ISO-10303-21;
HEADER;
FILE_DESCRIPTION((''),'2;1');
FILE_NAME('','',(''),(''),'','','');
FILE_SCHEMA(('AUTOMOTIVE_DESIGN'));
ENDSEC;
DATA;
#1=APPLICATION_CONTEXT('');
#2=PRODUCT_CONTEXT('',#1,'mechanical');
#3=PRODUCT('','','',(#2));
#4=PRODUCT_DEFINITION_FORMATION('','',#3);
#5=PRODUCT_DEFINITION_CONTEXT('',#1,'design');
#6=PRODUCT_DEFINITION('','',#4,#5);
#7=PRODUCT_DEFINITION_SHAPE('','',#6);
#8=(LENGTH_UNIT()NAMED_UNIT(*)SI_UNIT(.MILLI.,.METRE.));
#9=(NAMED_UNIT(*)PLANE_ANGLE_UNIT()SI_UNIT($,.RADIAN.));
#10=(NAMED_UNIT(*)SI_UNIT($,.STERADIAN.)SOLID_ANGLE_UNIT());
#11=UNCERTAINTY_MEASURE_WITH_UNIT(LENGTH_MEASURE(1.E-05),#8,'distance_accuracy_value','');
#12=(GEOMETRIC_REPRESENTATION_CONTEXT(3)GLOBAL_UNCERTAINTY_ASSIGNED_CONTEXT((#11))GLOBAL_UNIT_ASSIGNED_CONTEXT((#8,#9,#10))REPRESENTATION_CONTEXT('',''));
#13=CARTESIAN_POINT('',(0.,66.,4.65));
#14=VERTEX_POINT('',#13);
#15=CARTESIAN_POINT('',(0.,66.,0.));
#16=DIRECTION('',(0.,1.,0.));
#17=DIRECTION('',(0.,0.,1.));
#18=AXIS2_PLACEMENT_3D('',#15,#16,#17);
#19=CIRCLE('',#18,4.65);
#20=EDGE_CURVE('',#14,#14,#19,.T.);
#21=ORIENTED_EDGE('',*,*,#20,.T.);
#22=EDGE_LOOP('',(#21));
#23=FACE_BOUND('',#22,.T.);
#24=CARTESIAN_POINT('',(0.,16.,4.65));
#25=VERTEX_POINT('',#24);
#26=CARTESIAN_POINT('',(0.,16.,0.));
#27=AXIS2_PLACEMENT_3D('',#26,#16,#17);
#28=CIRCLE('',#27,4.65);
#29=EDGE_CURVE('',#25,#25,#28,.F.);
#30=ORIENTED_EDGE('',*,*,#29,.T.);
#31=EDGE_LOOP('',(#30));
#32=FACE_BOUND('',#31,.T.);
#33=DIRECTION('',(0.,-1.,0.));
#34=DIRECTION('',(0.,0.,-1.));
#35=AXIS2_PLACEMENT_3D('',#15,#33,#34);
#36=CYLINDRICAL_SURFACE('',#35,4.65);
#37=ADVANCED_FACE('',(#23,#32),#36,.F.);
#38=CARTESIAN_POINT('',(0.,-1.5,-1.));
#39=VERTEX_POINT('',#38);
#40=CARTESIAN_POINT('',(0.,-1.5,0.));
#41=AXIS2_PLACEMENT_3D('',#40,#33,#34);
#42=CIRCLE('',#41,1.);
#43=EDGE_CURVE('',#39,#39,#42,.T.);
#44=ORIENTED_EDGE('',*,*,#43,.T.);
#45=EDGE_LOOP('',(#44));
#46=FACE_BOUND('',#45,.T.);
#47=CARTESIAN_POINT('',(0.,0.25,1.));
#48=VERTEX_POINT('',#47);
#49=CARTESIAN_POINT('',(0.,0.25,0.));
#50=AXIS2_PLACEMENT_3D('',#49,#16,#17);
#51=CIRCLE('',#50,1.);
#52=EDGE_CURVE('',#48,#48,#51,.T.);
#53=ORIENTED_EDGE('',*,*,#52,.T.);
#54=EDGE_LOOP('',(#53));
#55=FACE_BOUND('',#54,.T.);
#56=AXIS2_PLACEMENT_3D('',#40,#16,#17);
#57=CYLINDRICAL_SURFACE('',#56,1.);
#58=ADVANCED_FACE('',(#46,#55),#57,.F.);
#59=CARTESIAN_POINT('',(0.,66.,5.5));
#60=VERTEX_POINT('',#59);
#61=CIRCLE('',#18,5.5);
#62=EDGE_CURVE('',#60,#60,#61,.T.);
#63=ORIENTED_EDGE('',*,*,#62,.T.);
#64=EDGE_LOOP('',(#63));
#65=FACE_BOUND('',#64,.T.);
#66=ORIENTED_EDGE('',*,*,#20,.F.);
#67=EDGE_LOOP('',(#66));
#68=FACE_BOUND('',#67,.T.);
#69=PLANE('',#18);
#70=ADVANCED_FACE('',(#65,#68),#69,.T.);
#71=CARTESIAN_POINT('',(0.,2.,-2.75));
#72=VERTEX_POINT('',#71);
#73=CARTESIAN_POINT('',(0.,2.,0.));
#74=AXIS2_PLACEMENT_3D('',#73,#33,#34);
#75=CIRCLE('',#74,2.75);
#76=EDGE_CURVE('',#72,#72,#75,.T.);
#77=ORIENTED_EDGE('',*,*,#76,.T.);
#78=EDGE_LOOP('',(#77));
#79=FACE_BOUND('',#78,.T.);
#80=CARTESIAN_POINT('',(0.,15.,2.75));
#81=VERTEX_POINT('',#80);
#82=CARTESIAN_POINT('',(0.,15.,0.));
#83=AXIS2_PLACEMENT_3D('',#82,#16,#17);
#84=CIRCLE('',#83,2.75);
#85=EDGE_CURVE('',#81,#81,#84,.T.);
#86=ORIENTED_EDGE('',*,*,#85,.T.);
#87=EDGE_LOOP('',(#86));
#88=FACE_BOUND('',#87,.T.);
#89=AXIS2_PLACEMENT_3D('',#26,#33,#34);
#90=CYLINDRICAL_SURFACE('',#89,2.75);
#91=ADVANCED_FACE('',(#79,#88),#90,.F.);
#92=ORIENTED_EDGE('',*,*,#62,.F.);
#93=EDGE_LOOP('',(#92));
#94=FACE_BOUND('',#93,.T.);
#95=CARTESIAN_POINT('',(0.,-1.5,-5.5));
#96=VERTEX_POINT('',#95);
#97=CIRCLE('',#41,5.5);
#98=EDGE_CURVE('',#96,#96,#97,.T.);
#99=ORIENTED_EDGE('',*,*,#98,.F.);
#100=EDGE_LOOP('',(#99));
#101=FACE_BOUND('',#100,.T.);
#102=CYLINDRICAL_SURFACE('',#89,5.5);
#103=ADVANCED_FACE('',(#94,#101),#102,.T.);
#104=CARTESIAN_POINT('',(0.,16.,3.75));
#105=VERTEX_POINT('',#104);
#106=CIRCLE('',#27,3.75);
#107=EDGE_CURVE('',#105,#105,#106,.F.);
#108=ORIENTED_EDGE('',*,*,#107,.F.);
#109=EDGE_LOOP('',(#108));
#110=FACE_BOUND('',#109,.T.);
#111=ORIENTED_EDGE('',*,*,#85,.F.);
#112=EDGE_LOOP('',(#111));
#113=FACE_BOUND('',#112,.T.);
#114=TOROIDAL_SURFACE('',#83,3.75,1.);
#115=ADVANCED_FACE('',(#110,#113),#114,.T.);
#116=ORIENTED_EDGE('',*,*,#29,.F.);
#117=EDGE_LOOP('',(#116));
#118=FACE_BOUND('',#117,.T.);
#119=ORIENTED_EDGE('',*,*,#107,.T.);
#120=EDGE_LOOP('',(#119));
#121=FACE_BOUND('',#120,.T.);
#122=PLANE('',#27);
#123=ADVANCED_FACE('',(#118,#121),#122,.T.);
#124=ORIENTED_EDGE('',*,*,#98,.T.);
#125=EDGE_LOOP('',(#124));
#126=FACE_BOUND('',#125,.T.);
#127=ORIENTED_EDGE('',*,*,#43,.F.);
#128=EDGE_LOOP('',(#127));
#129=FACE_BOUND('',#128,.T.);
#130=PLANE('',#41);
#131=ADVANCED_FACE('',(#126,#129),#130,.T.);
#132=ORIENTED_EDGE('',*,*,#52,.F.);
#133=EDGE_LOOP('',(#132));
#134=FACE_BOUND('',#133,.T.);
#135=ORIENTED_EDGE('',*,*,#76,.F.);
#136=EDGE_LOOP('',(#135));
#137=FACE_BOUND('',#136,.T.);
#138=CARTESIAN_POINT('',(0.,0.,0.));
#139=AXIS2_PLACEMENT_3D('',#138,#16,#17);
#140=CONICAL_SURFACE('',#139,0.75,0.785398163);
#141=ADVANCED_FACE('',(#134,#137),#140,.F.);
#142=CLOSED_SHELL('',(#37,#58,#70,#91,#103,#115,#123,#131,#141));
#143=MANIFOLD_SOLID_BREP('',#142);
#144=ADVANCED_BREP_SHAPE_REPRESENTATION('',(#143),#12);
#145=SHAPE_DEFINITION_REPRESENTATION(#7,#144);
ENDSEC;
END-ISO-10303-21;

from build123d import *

# Parameters (mm, degrees)
SKETCH1_R           = 5.5
SKETCH1_R_2         = 2.75
BOSS_EXTRUDE1_DEPTH = 16
BOSS_EXTRUDE2_START = 1.5
SKETCH2_R           = 5.5
SKETCH2_R_2         = 1
BOSS_EXTRUDE2_DEPTH = 1.5
SKETCH3_R           = 5.5
SKETCH3_R_2         = 4.65
BOSS_EXTRUDE3_DEPTH = 50
CHAMFER1_SIZE       = 2
FILLET1_R           = 1


with BuildPart() as part:
    # Sketch1 → Boss-Extrude1 (new body)
    with BuildSketch(Plane(origin=(0, 0, 0), x_dir=(1, 0, 0), z_dir=(0, 1, 0))):
        with Locations(Location((0, 0, 0), (0, 0, 270))):
            Circle(SKETCH1_R)
        with Locations(Location((0, 0, 0), (0, 0, 270))):
            Circle(SKETCH1_R_2, mode=Mode.SUBTRACT)
    extrude(amount=BOSS_EXTRUDE1_DEPTH)

    # Sketch2 → Boss-Extrude2 (add)
    with BuildSketch(Plane.XZ.offset(BOSS_EXTRUDE2_START)):
        with Locations(Location((0, 0, 0), (0, 0, 270))):
            Circle(SKETCH2_R)
        with Locations(Location((0, 0, 0), (0, 0, 270))):
            Circle(SKETCH2_R_2, mode=Mode.SUBTRACT)
    extrude(amount=-BOSS_EXTRUDE2_DEPTH)

    # Sketch3 → Boss-Extrude3 (add)
    with BuildSketch(Plane(origin=(0, 16, 0), x_dir=(1, 0, 0), z_dir=(0, 1, 0))):
        with Locations(Location((0, 0, 0), (0, 0, 90))):
            Circle(SKETCH3_R)
        with Locations(Location((0, 0, 0), (0, 0, 270))):
            Circle(SKETCH3_R_2, mode=Mode.SUBTRACT)
    extrude(amount=BOSS_EXTRUDE3_DEPTH)

    # Chamfer1
    # the kernel refuses this chamfer: 2 mm, written as the material it adds along each edge
    with BuildSketch(Plane(origin=(0, 0, 0), x_dir=(0, 0, 1), z_dir=(-1, 0, 0))) as chamfer1_piece_1_section:
        Polygon((2.75 - CHAMFER1_SIZE, 0), (2.75, CHAMFER1_SIZE), (2.75, 0), align=None)
    chamfer1_piece_1 = revolve(axis=Axis((0, 0, 0), (0, 1, 0)), mode=Mode.PRIVATE)
    chamfer1_piece_1 = chamfer1_piece_1 - Plane(origin=(0, 1.131660662, 0), x_dir=(0, 0, -1), z_dir=(0, -1, 0)) * Cylinder(1, 11, mode=Mode.PRIVATE)
    add(chamfer1_piece_1)

    # Fillet1
    fillet1_edges = [part.edges().sort_by_distance(p)[0] for p in [
        (0, 16, -2.75),
    ]]
    fillet(fillet1_edges, radius=FILLET1_R)


solid = part.part
